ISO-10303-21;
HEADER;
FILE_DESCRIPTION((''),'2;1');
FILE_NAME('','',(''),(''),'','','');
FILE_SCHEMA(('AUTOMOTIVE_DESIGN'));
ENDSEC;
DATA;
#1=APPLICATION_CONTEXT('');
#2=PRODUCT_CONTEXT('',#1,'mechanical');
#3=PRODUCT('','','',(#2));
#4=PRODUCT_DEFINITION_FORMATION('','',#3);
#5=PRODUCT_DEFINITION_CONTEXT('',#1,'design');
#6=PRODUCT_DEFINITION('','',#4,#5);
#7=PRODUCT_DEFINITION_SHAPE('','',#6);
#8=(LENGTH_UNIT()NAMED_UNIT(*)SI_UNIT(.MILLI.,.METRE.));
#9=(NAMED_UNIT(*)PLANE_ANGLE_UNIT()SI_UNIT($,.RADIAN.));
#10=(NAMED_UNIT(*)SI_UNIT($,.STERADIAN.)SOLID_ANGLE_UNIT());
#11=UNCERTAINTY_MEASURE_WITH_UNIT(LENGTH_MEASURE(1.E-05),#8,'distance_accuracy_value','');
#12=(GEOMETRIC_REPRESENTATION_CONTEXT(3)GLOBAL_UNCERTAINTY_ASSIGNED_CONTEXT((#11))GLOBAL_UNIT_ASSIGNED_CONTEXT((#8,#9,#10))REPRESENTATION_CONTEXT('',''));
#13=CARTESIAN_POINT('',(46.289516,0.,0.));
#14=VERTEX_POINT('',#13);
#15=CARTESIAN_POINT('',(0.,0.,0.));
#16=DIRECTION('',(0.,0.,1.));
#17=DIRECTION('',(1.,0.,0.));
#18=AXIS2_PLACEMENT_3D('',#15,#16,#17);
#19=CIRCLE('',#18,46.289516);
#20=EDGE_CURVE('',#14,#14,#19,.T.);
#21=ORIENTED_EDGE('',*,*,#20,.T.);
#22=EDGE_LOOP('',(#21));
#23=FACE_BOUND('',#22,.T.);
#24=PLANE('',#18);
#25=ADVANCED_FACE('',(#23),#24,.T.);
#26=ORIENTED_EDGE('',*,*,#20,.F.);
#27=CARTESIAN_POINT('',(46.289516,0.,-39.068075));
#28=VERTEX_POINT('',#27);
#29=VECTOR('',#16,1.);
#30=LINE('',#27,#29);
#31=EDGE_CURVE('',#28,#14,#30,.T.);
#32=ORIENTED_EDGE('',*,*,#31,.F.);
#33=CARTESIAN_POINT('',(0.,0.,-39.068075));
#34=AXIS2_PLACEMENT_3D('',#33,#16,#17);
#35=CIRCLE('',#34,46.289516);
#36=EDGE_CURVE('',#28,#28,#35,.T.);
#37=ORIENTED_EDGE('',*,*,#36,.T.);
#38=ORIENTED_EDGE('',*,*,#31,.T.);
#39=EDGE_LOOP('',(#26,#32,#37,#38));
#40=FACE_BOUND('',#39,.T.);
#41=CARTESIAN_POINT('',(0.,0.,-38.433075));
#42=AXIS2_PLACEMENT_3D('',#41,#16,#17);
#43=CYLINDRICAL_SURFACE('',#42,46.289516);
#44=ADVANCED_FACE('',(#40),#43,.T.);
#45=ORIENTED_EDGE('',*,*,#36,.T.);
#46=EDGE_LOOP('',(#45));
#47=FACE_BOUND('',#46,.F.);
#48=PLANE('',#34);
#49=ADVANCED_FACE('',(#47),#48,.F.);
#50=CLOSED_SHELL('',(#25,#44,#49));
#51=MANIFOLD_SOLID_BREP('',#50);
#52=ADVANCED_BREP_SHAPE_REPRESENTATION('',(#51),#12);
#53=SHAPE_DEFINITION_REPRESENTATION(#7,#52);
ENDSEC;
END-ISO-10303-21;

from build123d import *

# Parameters (mm, degrees)
F1_R     = 46.289516183
F3_DEPTH = 38.4330749512
F4_DEPTH = 0.635


# Not quite as in the source:
# - the program builds the solid bodies; features that only make, move or delete a surface that nothing else refers to are left out


with BuildPart() as f3:
    # F1 (on face) → F3 (new body)
    with BuildSketch(Plane.XY):
        Circle(F1_R)
    extrude(amount=-F3_DEPTH)

    # F4 (add): a face of the model
    f4_faces = [f3.faces().sort_by_distance(p)[0] for p in [
        (0, 0, -38.4330749512),
    ]]
    extrude(f4_faces, amount=F4_DEPTH)


solid = f3.part
